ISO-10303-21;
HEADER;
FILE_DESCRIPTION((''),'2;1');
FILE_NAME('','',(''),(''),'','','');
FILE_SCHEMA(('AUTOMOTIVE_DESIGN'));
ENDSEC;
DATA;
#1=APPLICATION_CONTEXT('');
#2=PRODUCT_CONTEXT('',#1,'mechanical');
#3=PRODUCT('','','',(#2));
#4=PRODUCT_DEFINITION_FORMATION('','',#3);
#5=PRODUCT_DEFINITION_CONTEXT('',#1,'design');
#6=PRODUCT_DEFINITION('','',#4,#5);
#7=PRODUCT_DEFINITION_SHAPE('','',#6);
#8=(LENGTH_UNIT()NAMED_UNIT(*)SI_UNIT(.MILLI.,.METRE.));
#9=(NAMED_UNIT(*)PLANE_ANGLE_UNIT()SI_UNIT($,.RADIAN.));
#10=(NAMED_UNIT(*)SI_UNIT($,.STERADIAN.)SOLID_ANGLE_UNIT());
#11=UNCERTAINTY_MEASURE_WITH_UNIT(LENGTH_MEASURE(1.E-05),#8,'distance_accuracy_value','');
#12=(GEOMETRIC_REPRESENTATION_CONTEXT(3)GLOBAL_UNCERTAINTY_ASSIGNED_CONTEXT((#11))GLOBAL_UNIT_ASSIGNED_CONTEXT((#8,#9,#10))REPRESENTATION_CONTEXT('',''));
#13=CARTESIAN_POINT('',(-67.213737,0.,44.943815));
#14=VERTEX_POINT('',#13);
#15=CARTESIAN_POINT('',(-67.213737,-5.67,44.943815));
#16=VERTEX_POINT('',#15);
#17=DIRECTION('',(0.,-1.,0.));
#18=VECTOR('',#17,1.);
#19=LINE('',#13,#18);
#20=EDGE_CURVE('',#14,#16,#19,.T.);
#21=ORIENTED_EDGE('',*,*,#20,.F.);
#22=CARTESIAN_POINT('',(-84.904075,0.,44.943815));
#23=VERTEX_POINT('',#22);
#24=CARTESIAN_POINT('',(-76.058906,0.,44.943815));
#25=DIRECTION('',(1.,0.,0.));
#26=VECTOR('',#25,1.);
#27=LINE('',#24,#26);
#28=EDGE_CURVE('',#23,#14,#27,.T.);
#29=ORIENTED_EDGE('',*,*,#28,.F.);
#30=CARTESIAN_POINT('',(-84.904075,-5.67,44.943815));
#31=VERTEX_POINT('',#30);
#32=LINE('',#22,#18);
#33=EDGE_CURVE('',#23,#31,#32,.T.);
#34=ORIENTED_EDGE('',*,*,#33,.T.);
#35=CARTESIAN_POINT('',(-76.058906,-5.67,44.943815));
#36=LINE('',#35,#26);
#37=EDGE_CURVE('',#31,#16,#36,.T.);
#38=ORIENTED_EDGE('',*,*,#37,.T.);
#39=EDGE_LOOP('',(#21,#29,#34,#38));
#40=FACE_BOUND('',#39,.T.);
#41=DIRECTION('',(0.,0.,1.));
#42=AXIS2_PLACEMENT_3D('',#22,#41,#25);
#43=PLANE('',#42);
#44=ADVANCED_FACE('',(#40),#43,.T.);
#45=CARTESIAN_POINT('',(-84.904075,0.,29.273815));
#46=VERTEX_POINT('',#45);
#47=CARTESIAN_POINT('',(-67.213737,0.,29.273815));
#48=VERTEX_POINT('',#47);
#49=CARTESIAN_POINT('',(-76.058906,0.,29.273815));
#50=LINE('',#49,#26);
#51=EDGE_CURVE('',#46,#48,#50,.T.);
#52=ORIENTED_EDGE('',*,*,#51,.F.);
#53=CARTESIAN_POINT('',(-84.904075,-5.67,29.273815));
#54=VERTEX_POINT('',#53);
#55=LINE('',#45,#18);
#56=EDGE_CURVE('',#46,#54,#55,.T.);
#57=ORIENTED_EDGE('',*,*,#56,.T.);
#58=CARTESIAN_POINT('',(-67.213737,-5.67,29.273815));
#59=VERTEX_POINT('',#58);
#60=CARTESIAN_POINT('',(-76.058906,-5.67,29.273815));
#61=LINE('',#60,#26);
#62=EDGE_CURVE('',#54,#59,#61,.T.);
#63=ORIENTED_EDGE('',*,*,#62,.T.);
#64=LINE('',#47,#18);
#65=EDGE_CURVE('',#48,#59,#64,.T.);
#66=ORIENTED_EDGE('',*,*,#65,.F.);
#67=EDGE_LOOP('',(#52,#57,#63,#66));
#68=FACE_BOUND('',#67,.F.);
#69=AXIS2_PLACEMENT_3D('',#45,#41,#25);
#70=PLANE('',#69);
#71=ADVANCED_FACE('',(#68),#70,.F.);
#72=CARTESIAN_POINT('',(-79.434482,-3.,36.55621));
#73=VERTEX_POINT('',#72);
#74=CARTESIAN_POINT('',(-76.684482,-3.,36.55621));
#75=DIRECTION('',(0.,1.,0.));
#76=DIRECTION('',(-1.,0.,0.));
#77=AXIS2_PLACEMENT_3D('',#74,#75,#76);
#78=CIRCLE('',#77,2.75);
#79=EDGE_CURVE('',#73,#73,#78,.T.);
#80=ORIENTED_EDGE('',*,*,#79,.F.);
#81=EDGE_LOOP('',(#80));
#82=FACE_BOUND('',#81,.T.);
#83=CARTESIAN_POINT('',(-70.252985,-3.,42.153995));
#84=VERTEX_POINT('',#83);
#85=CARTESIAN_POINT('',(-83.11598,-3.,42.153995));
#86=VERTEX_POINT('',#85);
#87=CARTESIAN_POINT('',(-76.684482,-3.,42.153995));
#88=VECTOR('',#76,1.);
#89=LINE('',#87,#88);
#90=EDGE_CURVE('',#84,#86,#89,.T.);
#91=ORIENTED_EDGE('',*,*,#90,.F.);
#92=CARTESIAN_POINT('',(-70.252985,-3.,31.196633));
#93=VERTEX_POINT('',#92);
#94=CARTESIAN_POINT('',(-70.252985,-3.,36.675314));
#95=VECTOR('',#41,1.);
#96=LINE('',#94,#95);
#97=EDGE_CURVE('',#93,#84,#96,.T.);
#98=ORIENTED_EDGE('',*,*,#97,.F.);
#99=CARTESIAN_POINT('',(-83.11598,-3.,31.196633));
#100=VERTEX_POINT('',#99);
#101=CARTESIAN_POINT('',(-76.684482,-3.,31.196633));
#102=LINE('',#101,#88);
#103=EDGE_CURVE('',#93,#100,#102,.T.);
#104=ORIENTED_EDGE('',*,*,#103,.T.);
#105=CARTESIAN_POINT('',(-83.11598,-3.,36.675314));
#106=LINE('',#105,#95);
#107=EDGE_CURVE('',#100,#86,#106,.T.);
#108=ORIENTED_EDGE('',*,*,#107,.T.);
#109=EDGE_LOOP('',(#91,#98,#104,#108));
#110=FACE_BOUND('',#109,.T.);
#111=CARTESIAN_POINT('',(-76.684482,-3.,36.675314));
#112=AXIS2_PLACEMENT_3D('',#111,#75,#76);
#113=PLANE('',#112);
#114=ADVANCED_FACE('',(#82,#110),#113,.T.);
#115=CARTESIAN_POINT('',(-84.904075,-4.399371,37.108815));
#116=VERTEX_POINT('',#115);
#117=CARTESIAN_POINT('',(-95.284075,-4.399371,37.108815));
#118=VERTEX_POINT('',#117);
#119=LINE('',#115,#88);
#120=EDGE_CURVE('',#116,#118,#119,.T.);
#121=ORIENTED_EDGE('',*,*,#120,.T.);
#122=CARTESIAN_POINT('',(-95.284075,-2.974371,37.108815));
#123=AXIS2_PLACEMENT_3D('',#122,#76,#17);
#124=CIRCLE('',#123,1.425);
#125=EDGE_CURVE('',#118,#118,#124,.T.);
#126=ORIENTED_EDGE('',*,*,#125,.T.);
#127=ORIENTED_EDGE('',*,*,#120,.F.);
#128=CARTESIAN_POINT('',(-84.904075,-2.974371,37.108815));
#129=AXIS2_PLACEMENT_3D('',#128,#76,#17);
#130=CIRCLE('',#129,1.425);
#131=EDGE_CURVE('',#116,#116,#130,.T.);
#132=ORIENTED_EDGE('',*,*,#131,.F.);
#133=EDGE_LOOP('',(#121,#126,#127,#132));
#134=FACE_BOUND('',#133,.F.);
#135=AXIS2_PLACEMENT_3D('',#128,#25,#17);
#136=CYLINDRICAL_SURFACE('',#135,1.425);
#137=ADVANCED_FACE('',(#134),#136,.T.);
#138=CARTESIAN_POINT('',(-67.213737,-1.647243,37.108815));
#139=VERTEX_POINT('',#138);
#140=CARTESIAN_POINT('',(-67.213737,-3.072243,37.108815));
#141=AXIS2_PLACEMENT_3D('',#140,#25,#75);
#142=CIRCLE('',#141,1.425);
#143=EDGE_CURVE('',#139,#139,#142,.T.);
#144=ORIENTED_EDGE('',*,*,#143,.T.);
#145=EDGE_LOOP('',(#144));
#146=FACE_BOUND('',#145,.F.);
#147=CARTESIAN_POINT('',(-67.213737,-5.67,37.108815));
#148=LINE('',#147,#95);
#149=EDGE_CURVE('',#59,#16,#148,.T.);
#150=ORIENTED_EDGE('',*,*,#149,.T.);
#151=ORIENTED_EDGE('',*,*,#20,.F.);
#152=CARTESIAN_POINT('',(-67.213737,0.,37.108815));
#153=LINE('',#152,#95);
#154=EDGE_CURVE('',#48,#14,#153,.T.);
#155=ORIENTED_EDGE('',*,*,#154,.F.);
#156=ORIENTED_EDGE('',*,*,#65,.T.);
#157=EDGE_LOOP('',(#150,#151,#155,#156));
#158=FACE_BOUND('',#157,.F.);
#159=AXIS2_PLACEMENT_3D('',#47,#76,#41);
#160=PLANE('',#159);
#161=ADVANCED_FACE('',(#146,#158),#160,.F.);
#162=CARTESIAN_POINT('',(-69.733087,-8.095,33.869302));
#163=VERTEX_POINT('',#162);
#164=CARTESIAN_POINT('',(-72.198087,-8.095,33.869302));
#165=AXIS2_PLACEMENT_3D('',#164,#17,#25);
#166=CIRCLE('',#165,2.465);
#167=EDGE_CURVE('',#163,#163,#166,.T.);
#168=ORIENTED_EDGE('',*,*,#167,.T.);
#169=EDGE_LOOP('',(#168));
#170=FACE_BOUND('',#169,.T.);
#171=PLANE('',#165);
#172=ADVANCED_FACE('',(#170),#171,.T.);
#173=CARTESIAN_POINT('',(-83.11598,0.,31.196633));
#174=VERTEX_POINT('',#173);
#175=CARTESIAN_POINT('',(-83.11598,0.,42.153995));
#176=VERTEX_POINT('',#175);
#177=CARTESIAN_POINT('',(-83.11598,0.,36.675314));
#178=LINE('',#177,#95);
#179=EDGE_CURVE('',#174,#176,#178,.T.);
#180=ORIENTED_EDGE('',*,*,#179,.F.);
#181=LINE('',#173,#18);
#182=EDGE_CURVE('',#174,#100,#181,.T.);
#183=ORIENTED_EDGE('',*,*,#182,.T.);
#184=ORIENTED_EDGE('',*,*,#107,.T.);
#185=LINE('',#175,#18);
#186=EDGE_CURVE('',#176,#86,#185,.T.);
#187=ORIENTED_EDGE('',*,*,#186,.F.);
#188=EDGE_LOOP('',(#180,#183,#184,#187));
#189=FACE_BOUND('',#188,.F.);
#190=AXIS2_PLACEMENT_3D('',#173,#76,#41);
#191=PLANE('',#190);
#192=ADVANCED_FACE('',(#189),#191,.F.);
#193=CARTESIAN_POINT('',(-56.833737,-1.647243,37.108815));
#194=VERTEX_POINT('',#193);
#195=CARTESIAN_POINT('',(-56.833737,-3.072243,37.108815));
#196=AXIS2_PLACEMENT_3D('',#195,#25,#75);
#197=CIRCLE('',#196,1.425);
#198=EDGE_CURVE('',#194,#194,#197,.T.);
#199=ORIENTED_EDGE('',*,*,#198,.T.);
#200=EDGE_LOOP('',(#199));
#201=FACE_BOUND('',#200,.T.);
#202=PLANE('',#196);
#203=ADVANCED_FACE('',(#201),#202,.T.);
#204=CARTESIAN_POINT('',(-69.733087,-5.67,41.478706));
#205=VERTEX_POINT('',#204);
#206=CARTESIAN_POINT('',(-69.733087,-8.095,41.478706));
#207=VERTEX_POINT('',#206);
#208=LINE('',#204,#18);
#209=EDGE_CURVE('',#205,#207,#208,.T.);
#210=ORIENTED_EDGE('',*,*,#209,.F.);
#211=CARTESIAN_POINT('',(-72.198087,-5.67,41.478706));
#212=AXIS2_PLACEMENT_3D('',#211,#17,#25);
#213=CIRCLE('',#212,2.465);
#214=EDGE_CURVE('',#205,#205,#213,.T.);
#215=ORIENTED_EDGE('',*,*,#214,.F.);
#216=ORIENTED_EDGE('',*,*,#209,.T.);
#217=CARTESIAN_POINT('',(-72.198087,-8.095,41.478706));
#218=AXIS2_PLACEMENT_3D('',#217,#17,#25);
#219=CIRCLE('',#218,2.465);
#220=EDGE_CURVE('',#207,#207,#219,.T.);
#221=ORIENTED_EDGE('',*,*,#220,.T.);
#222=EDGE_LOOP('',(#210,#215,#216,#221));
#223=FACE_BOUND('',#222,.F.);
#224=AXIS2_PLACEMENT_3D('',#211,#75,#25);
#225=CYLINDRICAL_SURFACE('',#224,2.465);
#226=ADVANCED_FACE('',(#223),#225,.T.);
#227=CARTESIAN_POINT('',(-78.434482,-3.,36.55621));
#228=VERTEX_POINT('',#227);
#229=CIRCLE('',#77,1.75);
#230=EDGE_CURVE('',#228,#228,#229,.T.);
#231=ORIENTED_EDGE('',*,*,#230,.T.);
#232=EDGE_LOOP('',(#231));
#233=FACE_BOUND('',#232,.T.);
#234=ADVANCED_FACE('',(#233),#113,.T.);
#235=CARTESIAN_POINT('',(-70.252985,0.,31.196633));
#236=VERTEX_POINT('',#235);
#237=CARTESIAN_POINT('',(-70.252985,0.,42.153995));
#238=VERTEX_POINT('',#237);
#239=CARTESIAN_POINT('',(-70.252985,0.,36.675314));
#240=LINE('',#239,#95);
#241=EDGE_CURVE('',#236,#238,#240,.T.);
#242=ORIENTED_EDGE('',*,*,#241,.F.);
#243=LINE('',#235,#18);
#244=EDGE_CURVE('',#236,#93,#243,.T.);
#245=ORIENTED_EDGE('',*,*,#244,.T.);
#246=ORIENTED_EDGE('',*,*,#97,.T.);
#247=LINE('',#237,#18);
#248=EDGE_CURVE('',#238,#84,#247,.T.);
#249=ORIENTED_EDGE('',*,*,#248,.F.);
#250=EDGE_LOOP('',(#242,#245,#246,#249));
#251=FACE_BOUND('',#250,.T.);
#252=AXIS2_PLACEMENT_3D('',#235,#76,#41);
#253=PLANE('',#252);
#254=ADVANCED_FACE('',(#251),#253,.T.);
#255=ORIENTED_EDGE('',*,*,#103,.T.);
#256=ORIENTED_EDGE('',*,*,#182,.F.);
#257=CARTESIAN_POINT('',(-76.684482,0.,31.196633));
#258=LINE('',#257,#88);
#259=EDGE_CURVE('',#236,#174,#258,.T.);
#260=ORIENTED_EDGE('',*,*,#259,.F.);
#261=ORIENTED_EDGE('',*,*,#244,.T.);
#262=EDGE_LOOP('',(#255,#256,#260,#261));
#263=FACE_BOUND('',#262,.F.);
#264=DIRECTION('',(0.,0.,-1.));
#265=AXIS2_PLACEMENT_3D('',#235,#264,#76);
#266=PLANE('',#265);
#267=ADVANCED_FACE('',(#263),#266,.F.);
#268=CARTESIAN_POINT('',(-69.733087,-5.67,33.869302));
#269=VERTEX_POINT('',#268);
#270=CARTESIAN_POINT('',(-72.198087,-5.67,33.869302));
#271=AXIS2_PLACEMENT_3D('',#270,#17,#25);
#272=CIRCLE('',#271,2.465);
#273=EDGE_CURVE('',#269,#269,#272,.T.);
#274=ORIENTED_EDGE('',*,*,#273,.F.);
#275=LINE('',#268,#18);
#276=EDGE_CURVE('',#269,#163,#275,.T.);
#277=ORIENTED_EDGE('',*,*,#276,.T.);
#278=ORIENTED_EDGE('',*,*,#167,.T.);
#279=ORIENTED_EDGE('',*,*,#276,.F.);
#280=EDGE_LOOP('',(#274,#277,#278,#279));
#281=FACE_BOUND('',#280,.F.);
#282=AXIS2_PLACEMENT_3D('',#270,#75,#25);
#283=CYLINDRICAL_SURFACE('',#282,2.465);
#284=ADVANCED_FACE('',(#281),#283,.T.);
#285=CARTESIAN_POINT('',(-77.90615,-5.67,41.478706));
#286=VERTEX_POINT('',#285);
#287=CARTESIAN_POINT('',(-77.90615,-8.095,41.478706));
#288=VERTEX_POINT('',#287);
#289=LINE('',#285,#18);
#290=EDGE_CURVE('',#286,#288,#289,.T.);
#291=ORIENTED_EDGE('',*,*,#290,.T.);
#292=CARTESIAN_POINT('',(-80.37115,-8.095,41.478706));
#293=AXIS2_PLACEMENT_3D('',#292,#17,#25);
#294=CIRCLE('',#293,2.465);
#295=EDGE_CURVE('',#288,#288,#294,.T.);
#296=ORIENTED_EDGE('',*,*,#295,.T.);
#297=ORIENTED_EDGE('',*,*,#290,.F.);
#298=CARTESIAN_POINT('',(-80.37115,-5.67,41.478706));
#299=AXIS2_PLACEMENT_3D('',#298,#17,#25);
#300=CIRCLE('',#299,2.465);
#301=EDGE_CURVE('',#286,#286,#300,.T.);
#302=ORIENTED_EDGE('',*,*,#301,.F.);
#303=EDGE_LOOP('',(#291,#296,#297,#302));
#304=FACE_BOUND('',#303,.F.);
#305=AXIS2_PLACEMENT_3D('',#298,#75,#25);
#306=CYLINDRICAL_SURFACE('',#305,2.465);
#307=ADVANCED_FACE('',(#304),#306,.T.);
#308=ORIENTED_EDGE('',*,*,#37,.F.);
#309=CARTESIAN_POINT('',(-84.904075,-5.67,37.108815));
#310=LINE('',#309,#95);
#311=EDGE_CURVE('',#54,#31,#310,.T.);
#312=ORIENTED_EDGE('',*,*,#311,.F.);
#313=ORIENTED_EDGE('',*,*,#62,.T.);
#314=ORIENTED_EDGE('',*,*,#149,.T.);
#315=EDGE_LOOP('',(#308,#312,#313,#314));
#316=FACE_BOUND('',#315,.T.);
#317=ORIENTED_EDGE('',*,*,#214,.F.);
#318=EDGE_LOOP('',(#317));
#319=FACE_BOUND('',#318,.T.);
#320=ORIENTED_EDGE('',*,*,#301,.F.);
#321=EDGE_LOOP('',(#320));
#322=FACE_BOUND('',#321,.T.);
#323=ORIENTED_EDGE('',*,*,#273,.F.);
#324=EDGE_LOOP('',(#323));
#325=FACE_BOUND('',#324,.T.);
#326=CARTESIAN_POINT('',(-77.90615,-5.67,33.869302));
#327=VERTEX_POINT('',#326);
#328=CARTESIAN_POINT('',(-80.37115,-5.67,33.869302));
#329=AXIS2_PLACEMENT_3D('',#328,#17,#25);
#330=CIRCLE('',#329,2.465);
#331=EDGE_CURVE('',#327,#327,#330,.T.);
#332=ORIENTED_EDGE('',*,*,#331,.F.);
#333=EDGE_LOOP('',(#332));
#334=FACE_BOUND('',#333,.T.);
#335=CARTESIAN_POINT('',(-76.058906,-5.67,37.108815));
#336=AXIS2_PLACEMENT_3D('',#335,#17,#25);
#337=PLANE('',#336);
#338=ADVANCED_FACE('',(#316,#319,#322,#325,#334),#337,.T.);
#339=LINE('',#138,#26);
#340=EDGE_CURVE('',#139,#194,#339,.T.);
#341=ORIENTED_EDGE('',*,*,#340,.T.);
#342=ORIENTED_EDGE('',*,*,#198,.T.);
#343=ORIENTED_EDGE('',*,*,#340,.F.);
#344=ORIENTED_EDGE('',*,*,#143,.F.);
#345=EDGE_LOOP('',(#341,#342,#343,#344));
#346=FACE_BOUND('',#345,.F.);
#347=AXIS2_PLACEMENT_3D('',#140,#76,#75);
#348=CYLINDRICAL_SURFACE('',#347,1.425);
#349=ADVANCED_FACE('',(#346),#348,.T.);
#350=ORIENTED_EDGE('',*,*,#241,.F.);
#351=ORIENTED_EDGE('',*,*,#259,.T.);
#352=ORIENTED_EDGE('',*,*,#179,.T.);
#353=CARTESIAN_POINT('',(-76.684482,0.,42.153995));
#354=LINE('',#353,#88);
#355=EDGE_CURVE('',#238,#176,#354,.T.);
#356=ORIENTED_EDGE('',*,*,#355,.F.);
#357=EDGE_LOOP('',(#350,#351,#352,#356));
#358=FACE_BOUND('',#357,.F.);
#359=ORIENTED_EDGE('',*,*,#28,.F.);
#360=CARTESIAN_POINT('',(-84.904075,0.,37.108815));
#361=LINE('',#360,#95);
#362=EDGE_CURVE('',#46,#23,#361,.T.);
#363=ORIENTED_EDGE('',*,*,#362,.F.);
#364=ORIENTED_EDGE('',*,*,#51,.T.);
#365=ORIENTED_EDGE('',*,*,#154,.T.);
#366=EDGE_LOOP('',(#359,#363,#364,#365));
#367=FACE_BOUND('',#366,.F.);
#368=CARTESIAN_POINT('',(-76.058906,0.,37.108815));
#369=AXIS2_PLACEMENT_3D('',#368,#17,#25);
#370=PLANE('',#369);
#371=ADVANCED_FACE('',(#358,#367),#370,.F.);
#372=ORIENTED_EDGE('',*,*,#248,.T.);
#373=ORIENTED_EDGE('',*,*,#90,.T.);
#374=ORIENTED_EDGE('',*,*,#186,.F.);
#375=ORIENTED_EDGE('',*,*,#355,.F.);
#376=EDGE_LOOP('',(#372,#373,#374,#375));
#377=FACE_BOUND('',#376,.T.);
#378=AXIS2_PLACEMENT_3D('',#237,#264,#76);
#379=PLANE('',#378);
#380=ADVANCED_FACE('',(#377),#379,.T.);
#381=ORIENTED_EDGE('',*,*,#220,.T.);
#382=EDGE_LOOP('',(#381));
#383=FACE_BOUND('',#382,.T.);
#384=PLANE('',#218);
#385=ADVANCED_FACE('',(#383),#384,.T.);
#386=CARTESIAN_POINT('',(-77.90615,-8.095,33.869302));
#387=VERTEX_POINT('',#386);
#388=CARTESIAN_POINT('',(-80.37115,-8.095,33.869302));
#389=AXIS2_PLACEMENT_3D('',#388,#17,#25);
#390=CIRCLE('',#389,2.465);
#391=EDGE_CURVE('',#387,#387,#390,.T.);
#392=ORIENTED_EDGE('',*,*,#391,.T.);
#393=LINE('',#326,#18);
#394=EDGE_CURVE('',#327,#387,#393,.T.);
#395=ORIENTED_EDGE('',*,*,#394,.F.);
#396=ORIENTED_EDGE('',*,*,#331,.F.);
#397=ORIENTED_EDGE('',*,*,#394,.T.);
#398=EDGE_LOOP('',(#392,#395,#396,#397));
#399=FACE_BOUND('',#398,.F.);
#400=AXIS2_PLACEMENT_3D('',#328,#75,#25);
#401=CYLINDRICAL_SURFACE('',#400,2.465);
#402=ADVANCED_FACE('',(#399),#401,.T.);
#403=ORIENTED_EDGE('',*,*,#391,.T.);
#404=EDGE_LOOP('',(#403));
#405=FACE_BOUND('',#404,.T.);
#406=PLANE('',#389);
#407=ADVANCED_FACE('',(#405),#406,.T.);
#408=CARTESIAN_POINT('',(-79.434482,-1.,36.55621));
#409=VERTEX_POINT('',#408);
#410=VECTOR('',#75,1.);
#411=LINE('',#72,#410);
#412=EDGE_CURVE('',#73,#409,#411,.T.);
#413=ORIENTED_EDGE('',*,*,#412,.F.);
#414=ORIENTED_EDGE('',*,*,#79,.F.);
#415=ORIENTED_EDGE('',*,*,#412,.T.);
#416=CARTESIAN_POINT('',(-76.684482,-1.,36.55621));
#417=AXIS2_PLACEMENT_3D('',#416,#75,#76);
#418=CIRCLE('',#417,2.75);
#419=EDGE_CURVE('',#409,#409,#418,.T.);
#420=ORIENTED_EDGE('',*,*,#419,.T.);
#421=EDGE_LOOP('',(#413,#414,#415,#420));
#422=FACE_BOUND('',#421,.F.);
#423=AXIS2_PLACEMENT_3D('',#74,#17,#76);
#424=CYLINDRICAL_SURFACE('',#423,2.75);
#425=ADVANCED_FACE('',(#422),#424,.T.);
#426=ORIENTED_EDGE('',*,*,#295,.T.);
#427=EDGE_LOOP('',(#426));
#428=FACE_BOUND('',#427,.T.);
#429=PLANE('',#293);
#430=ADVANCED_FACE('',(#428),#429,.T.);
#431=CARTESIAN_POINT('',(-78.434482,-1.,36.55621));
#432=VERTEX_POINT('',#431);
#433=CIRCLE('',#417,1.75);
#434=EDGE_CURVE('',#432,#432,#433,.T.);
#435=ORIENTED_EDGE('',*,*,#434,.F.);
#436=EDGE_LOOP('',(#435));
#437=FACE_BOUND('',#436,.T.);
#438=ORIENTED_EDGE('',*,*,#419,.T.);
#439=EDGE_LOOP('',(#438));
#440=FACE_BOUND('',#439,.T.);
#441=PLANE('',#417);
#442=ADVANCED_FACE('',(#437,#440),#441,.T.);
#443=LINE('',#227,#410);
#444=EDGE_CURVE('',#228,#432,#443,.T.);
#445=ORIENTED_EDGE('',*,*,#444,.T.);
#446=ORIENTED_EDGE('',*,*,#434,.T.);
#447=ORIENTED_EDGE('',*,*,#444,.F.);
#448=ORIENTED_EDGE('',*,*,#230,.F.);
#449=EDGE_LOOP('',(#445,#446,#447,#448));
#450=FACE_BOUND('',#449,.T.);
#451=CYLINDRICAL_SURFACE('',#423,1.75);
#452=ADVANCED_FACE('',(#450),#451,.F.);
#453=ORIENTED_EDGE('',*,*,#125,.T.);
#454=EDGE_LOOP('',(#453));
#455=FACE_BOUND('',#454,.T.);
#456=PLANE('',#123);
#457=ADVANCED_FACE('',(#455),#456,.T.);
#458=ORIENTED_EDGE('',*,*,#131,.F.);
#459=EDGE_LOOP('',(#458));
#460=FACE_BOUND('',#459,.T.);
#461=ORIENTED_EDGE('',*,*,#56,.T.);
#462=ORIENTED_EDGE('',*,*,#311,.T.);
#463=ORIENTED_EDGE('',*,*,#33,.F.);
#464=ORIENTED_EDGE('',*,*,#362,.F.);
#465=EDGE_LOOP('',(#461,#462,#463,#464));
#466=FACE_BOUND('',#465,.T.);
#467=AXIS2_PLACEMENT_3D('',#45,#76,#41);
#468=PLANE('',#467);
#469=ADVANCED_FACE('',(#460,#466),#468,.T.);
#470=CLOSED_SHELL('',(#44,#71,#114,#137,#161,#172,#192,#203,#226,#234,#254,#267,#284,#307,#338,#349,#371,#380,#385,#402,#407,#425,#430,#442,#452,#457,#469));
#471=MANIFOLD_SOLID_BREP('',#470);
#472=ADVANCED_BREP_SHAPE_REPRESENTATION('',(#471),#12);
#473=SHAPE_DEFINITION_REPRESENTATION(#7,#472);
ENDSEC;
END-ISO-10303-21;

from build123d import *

# Parameters (mm, degrees)
F0_R      = 7.8435703096
F1_DEPTH  = 5.67
F0_R_2    = 7.7757185056
F2_W      = 17.6903378959
F2_H      = 15.67
F3_DEPTH  = 5.67
F4_R      = 1.425
F5_DEPTH  = 10.38
F6_R      = 1.425
F7_DEPTH  = 10.38
F8_R      = 2.465
F9_DEPTH  = 2.425
F10_W     = 12.8629952669
F10_H     = 10.9573621303
F11_DEPTH = 3
F12_R     = 2.75
F12_R_2   = 1.75
F13_DEPTH = 2
F14_R     = 4.345
F14_R_2   = 3.4662678384
F15_DEPTH = 25
F14_R_3   = 3.1273613379
F14_R_4   = 4.1038801884
F14_R_5   = 4.2870364602
F16_DEPTH = 25


with BuildPart() as f1:
    # F0 (on Front) → F1 (new body)
    with BuildSketch(Plane.XZ):
        with Locations((-31.0182443455, 13.5022135742)):
            Circle(F0_R)
    extrude(amount=F1_DEPTH)

    # F14 (on Front) → F15, piece 2 (join)
    with BuildSketch(Plane.XZ):
        with Locations((-31.2459040433, 14.0220327303)):
            Circle(F14_R)
        with Locations((-31.2459040433, 14.0220327303)):
            Circle(F14_R_3, mode=Mode.SUBTRACT)
    extrude(amount=F15_DEPTH)

    # F14 (on Front) → F16 (cut)
    with BuildSketch(Plane.XZ):
        with Locations((27.6749636978, 13.738758862)):
            Circle(F14_R)
        with Locations((27.6749636978, 13.738758862)):
            Circle(F14_R_2, mode=Mode.SUBTRACT)
        with Locations((-30.9626311064, -35.5508103967)):
            Circle(F14_R)
        with Locations((-30.9626311064, -35.5508103967)):
            Circle(F14_R_4, mode=Mode.SUBTRACT)
        with Locations((27.9582366347, -35.5508103967)):
            Circle(F14_R)
        with Locations((27.9582366347, -35.5508103967)):
            Circle(F14_R_5, mode=Mode.SUBTRACT)
        with Locations((-31.2459040433, 14.0220327303)):
            Circle(F14_R)
        with Locations((-31.2459040433, 14.0220327303)):
            Circle(F14_R_3, mode=Mode.SUBTRACT)
    extrude(amount=-F16_DEPTH, mode=Mode.SUBTRACT)


with BuildPart() as f1b:
    # F0 (on Front) → F1, piece 2 (new body)
    with BuildSketch(Plane.XZ):
        with Locations((27.6562659057, 13.5022135742)):
            Circle(F0_R_2)
    extrude(amount=F1_DEPTH)

    # F14 (on Front) → F15 (join)
    with BuildSketch(Plane.XZ):
        with Locations((27.6749636978, 13.738758862)):
            Circle(F14_R)
        with Locations((27.6749636978, 13.738758862)):
            Circle(F14_R_2, mode=Mode.SUBTRACT)
    extrude(amount=F15_DEPTH)


with BuildPart() as f1c:
    # F0 (on Front) → F1, piece 3 (new body)
    with BuildSketch(Plane.XZ):
        with Locations((-31.0182443455, -35.7866174178)):
            Circle(F0_R_2)
    extrude(amount=F1_DEPTH)

    # F14 (on Front) → F15, piece 3 (join)
    with BuildSketch(Plane.XZ):
        with Locations((-30.9626311064, -35.5508103967)):
            Circle(F14_R)
        with Locations((-30.9626311064, -35.5508103967)):
            Circle(F14_R_4, mode=Mode.SUBTRACT)
    extrude(amount=F15_DEPTH)


with BuildPart() as f1d:
    # F0 (on Front) → F1, piece 4 (new body)
    with BuildSketch(Plane.XZ):
        with Locations((27.6562659057, -35.7866174178)):
            Circle(F0_R_2)
    extrude(amount=F1_DEPTH)

    # F14 (on Front) → F15, piece 4 (join)
    with BuildSketch(Plane.XZ):
        with Locations((27.9582366347, -35.5508103967)):
            Circle(F14_R)
        with Locations((27.9582366347, -35.5508103967)):
            Circle(F14_R_5, mode=Mode.SUBTRACT)
    extrude(amount=F15_DEPTH)


with BuildPart() as f3:
    # F2 (on Front) → F3 (new body)
    with BuildSketch(Plane.XZ):
        with Locations((-76.0589055717, 37.1088152751)):
            Rectangle(F2_W, F2_H)
    extrude(amount=F3_DEPTH)

    # F4 (on face) → F5 (join)
    with BuildSketch(Plane(origin=(-84.9040745196, 0, 0), x_dir=(0, -1, 0), z_dir=(-1, 0, 0))):
        with Locations((2.974371193, 37.1088152751)):
            Circle(F4_R)
    extrude(amount=F5_DEPTH)

    # F6 (on face) → F7 (join)
    with BuildSketch(Plane.YZ.offset(-67.2137366238)):
        with Locations((-3.0722431839, 37.1088152751)):
            Circle(F6_R)
    extrude(amount=F7_DEPTH)

    # F8 (on face) → F9 (join)
    with BuildSketch(Plane.XZ.offset(5.67)):
        with Locations((-80.3711495243, 41.4787063429)):
            Circle(F8_R)
        with Locations((-72.1980867, 41.4787063429)):
            Circle(F8_R)
        with Locations((-72.1980867, 33.8693021292)):
            Circle(F8_R)
        with Locations((-80.3711495243, 33.8693021292)):
            Circle(F8_R)
    extrude(amount=F9_DEPTH)

    # F10 (on face) → F11 (cut)
    with BuildSketch(Plane(origin=(0, 0, 0), x_dir=(-1, 0, 0), z_dir=(0, 1, 0))):
        with Locations((76.6844823956, 36.675314419)):
            Rectangle(F10_W, F10_H)
    extrude(amount=-F11_DEPTH, mode=Mode.SUBTRACT)

    # F12 (on face) → F13 (join)
    with BuildSketch(Plane(origin=(0, -3, 0), x_dir=(-1, 0, 0), z_dir=(0, 1, 0))):
        with Locations((76.6844823956, 36.5562103689)):
            Circle(F12_R)
        with Locations((76.6844823956, 36.5562103689)):
            Circle(F12_R_2, mode=Mode.SUBTRACT)
    extrude(amount=F13_DEPTH)


solid = f3.part
